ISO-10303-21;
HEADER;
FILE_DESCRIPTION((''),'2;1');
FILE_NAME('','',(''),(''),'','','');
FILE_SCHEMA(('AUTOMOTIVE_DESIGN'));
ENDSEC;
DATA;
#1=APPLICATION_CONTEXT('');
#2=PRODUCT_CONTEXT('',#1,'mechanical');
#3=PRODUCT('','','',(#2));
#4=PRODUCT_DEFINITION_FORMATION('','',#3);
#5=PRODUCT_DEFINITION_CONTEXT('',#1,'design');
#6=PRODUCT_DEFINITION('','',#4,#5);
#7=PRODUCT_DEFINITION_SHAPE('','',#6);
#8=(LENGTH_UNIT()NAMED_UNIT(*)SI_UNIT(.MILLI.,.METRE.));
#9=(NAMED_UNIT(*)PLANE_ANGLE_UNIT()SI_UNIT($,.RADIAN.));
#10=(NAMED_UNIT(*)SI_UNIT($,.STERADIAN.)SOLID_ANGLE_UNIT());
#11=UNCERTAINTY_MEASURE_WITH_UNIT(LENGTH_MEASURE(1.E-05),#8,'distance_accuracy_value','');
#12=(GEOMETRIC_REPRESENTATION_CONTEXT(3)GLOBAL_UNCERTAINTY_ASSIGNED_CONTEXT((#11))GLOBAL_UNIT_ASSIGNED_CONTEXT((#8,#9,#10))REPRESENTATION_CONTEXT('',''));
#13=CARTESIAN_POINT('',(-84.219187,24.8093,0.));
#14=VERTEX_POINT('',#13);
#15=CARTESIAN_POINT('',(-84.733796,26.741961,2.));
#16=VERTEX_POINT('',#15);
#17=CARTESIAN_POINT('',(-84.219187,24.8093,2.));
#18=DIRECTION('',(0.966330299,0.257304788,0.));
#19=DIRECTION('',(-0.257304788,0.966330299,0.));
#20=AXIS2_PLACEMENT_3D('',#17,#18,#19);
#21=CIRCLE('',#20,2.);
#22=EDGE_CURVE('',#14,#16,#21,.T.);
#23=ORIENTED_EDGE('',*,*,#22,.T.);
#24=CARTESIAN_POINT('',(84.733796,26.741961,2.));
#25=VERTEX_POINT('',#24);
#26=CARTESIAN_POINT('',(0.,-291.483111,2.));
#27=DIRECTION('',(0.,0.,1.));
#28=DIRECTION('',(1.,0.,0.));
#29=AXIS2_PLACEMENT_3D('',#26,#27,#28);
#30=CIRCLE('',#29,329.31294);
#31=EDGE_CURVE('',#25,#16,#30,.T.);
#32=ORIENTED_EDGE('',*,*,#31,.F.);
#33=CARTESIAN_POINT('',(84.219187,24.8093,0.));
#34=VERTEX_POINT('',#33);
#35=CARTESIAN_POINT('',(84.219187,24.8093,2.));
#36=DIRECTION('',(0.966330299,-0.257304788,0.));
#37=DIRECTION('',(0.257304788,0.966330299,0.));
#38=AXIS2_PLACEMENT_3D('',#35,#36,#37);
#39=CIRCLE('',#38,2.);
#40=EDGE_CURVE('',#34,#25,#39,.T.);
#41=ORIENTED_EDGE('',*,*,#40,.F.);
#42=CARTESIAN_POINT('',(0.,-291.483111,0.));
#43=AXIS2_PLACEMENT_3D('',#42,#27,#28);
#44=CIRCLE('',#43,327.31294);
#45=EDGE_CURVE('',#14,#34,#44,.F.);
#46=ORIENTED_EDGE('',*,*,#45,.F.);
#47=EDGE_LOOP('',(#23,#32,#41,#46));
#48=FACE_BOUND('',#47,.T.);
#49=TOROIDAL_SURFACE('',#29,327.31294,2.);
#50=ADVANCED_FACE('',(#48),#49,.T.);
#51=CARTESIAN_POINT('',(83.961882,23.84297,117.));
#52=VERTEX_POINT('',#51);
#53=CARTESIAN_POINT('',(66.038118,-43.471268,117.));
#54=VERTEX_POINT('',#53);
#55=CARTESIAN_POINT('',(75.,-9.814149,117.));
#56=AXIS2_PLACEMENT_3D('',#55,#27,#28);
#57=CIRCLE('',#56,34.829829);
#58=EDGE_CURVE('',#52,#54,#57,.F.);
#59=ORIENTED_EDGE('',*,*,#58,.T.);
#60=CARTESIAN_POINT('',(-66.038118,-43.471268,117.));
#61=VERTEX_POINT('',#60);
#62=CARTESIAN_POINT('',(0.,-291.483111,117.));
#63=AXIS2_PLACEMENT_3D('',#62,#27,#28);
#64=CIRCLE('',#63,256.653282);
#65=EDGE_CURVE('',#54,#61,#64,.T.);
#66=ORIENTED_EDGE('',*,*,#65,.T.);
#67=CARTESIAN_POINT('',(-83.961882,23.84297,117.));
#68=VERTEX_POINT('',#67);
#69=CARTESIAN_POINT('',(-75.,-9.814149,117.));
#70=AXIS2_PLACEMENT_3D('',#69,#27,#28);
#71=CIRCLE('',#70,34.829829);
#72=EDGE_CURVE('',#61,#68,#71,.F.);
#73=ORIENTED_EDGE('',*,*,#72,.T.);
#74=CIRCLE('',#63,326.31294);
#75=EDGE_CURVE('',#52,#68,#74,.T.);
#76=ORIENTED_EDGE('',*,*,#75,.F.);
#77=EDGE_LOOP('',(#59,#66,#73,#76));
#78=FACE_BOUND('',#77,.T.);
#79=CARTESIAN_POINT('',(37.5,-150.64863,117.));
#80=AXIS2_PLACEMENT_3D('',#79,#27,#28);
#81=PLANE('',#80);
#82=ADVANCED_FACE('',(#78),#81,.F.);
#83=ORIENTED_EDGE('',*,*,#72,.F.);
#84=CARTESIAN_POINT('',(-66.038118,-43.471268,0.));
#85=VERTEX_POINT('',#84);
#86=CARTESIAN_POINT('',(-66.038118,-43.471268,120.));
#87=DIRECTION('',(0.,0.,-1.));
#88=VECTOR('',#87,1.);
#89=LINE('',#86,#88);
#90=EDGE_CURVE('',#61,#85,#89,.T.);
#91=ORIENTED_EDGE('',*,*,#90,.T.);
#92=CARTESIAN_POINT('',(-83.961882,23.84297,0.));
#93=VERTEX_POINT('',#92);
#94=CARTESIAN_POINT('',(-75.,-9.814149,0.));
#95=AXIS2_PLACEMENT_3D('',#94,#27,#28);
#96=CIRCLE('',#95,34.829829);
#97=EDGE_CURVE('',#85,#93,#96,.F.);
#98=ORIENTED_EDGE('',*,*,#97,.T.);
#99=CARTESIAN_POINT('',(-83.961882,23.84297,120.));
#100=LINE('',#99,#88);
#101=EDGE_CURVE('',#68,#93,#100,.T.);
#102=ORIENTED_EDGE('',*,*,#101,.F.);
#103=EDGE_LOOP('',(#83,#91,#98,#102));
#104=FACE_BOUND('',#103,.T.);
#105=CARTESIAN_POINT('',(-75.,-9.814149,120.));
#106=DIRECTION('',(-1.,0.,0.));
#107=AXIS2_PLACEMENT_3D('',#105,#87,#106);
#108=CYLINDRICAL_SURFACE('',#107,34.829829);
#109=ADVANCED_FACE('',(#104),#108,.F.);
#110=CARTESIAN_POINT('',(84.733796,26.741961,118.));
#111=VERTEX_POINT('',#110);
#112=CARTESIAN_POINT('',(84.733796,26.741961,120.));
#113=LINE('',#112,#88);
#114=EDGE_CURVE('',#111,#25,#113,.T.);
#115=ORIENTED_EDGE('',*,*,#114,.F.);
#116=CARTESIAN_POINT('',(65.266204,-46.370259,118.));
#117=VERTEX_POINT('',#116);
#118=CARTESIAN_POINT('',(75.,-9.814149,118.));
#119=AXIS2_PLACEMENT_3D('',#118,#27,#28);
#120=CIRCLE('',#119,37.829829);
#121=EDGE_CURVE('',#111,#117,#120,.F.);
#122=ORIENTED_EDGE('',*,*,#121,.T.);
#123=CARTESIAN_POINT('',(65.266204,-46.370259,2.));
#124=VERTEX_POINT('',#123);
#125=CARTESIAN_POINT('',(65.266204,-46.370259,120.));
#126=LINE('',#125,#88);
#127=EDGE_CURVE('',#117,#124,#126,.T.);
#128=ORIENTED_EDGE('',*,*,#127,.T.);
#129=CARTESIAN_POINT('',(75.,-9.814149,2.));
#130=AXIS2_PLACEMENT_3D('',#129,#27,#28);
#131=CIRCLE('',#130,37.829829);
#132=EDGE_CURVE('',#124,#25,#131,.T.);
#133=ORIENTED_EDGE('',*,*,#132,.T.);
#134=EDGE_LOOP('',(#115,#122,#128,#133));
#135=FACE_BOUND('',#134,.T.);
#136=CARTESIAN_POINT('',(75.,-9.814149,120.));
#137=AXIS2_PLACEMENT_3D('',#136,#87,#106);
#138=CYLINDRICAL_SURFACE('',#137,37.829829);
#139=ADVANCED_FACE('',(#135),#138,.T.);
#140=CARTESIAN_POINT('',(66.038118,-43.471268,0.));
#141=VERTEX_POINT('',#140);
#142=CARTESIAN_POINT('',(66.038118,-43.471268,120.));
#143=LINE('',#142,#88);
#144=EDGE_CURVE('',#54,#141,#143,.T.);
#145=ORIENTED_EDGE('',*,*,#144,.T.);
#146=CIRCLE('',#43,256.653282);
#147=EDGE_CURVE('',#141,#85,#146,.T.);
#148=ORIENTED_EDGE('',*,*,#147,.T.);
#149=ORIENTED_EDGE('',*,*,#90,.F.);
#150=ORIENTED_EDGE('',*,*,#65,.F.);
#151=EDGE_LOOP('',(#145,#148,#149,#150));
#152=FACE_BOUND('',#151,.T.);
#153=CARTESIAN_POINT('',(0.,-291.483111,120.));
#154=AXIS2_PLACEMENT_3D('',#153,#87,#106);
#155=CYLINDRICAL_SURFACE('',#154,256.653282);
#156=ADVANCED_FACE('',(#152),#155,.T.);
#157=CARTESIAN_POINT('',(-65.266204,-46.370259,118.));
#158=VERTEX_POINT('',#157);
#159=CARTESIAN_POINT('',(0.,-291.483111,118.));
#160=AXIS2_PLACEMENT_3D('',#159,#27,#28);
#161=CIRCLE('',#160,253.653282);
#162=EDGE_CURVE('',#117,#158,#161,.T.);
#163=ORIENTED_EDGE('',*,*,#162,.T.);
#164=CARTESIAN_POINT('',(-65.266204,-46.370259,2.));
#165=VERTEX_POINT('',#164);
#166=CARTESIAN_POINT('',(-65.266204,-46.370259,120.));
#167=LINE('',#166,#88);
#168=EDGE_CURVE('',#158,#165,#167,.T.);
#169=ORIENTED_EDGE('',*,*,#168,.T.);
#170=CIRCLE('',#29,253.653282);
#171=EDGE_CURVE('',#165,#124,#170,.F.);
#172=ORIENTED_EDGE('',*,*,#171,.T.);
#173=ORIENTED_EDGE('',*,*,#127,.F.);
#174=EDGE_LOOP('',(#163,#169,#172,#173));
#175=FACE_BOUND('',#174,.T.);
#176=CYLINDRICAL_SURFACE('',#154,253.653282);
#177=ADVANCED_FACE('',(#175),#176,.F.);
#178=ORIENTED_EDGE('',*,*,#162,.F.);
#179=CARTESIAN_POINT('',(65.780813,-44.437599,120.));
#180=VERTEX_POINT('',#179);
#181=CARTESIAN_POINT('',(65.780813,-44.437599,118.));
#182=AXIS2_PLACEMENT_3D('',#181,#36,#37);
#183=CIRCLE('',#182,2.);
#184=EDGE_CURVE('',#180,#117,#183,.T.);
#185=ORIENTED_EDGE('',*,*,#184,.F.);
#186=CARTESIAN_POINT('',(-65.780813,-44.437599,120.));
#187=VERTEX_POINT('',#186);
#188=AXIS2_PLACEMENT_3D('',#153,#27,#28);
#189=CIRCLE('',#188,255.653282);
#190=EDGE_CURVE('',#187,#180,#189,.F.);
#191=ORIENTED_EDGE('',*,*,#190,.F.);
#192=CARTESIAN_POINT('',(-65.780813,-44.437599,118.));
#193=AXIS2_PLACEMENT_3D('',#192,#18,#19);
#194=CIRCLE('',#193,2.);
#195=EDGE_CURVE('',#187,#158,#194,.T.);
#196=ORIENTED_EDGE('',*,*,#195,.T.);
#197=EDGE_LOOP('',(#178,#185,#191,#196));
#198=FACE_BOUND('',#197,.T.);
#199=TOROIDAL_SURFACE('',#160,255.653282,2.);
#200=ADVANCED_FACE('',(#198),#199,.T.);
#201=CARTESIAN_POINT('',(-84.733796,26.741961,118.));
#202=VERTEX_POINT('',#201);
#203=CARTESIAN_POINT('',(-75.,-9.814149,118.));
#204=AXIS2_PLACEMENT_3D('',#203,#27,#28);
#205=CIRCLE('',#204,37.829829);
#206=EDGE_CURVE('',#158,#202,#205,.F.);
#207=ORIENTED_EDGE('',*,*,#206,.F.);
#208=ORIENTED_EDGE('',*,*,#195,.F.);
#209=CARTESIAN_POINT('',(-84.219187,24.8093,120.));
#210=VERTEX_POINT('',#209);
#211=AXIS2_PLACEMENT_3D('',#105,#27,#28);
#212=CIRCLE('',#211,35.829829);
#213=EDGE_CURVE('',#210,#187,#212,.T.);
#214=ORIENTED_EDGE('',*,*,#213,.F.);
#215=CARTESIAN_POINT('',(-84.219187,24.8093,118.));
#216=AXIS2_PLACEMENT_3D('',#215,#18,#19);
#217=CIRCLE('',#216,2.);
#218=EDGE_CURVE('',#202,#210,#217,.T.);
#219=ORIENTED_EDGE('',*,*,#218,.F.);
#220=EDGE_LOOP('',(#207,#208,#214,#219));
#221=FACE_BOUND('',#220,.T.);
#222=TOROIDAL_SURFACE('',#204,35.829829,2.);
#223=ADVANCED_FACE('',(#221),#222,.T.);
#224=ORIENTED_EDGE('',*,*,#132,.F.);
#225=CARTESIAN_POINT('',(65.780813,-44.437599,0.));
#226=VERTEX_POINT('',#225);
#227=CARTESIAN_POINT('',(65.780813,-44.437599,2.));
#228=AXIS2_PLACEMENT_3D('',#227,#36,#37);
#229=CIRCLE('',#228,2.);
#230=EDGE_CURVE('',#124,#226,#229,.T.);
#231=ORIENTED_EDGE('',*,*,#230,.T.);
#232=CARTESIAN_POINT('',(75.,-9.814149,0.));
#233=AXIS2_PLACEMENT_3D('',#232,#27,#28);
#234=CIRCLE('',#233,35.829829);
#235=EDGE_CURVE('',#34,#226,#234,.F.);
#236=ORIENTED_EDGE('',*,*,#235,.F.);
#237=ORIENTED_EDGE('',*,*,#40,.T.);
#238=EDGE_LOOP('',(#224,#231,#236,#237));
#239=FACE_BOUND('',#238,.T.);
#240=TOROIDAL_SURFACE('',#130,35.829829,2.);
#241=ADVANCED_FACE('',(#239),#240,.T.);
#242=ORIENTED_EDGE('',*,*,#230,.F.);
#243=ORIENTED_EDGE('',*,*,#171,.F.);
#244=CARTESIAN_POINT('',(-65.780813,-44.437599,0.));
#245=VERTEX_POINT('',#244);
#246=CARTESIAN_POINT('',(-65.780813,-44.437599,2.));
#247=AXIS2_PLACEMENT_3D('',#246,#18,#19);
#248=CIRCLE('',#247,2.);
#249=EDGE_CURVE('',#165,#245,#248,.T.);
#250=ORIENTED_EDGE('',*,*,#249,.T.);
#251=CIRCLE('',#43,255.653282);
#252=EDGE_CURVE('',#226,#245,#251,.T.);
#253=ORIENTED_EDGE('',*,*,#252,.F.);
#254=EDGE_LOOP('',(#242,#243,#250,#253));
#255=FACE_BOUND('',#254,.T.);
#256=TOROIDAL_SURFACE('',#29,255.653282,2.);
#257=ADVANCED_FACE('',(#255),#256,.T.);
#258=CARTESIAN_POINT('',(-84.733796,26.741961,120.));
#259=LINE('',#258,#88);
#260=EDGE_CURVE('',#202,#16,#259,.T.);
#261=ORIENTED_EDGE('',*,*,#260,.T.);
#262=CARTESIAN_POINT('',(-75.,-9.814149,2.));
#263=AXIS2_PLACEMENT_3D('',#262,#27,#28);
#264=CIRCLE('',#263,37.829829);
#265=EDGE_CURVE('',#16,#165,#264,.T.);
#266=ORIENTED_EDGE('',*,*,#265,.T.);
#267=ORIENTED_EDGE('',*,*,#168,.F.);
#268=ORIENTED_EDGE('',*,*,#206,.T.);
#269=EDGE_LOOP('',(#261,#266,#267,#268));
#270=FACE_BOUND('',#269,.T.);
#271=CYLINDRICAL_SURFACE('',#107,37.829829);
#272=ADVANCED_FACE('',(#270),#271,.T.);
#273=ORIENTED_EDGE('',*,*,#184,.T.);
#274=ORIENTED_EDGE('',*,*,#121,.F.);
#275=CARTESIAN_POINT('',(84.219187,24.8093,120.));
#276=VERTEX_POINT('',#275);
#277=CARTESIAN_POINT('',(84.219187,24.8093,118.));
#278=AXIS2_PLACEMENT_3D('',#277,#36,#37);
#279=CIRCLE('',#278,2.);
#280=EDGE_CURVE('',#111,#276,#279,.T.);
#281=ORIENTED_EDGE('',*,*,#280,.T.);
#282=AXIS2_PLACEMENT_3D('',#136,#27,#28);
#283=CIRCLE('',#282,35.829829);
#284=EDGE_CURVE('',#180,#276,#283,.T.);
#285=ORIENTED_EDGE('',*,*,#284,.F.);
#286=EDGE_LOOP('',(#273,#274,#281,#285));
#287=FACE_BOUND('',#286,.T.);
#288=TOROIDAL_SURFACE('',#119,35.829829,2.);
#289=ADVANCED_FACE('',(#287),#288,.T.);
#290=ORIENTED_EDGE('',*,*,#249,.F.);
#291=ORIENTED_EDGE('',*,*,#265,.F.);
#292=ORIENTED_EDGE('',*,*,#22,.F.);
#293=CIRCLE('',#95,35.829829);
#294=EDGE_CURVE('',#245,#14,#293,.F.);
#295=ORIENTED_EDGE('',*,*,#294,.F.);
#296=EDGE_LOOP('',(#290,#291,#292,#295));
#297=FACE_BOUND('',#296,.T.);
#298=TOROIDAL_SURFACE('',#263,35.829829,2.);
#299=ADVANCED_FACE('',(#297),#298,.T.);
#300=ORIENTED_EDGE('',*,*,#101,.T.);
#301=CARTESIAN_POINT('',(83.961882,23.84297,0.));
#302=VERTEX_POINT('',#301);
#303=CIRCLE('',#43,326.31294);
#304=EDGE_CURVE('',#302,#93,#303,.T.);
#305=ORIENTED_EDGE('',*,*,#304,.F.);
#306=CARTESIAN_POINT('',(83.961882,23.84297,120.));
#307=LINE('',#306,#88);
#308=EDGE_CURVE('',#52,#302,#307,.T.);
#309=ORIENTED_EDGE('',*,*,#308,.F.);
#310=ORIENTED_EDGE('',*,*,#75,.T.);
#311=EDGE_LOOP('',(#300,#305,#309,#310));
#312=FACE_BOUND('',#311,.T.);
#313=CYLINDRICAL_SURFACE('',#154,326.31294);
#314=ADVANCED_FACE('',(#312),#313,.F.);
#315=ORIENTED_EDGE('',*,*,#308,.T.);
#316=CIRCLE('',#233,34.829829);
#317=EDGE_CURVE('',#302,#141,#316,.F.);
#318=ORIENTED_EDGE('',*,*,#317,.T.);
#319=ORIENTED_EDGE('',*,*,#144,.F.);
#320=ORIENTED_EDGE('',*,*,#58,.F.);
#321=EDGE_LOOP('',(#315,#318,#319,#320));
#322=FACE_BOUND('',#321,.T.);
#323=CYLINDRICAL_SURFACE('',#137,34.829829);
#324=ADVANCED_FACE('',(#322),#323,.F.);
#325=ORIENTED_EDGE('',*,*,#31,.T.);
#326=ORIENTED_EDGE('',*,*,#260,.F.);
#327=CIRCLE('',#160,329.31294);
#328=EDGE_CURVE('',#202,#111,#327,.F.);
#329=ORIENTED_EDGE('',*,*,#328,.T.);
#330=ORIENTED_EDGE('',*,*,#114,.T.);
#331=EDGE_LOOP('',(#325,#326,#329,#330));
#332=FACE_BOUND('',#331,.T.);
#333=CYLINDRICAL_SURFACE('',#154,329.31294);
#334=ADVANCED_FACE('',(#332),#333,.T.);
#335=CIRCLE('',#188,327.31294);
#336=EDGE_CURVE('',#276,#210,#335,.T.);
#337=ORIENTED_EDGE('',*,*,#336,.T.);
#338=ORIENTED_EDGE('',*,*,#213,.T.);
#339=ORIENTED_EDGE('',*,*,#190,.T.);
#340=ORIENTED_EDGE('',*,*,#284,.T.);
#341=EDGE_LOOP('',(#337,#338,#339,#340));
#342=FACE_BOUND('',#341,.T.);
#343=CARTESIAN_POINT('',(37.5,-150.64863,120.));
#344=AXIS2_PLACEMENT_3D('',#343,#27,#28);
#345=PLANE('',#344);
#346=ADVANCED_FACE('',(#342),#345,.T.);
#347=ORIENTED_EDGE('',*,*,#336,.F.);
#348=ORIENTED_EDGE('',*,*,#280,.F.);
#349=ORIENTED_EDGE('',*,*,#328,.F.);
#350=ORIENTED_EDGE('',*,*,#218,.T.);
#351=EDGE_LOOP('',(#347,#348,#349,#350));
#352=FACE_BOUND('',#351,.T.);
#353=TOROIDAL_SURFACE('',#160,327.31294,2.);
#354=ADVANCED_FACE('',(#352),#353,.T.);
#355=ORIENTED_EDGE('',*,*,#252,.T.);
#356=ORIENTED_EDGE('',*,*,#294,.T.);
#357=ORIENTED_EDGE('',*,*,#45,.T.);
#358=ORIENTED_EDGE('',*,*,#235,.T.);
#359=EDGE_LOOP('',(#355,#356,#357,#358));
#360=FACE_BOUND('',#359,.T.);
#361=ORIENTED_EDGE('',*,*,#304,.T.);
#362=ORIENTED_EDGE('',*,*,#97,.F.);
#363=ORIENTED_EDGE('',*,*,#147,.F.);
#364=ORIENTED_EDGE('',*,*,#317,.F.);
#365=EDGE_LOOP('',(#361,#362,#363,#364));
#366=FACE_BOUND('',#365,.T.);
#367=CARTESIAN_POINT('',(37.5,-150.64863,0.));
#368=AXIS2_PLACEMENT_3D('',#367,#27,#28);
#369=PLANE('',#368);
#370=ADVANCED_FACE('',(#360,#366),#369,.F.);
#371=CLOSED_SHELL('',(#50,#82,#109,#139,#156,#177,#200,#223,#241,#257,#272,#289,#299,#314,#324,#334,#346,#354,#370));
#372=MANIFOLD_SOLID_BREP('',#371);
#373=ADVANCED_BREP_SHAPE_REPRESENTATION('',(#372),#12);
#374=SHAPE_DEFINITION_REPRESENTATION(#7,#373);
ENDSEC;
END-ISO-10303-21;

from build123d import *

# Parameters (mm, degrees)
BOSS_EXTRU_1_DEPTH = 120
CONG_1_R           = 2
CONG_2_R           = 2
COQUE1_DEPTH       = 117


# Read off the part's stored shape, not the designer's step: Coque1
with BuildPart() as part:
    # Esquisse2 → Boss.-Extru.1 (new body)
    with BuildSketch(Plane.XY):
        with BuildLine():
            ThreePointArc((84.733796148, 26.7419608), (0, 37.829829119), (-84.733796148, 26.7419608))
            ThreePointArc((-84.733796148, 26.7419608), (-111.556110074, -19.547945422), (-65.266203852, -46.370259347))
            ThreePointArc((-65.266203852, -46.370259347), (0, -37.829829119), (65.266203852, -46.370259347))
            ThreePointArc((65.266203852, -46.370259347), (111.556110074, -19.547945422), (84.733796148, 26.7419608))
        make_face()
    extrude(amount=BOSS_EXTRU_1_DEPTH)

    # Congé1
    cong_1_edges = [part.edges().sort_by_distance(p)[0] for p in [
        (-111.556110074, -19.547945422, 120),
        (0, -37.829829119, 120),
        (111.556110074, -19.547945422, 120),
        (0, 37.829829119, 120),
    ]]
    fillet(cong_1_edges, radius=CONG_1_R)

    # Congé2
    cong_2_edges = [part.edges().sort_by_distance(p)[0] for p in [
        (0, -37.829829119, 0),
        (-111.556110074, -19.547945422, 0),
        (0, 37.829829119, 0),
        (111.556110074, -19.547945422, 0),
    ]]
    fillet(cong_2_edges, radius=CONG_2_R)

    # Coque1 outline → Coque1 (cut)
    with BuildSketch(Plane.XY):
        with BuildLine():
            ThreePointArc((66.038118215, -43.471268451), (108.657119178, -18.776031059), (83.961881785, 23.842969904))
            ThreePointArc((83.961881785, 23.842969904), (0, 34.829829119), (-83.961881785, 23.842969904))
            ThreePointArc((-83.961881785, 23.842969904), (-108.657119178, -18.776031059), (-66.038118215, -43.471268451))
            ThreePointArc((-66.038118215, -43.471268451), (0, -34.829829119), (66.038118215, -43.471268451))
        make_face()
    extrude(amount=COQUE1_DEPTH, mode=Mode.SUBTRACT)


solid = part.part
